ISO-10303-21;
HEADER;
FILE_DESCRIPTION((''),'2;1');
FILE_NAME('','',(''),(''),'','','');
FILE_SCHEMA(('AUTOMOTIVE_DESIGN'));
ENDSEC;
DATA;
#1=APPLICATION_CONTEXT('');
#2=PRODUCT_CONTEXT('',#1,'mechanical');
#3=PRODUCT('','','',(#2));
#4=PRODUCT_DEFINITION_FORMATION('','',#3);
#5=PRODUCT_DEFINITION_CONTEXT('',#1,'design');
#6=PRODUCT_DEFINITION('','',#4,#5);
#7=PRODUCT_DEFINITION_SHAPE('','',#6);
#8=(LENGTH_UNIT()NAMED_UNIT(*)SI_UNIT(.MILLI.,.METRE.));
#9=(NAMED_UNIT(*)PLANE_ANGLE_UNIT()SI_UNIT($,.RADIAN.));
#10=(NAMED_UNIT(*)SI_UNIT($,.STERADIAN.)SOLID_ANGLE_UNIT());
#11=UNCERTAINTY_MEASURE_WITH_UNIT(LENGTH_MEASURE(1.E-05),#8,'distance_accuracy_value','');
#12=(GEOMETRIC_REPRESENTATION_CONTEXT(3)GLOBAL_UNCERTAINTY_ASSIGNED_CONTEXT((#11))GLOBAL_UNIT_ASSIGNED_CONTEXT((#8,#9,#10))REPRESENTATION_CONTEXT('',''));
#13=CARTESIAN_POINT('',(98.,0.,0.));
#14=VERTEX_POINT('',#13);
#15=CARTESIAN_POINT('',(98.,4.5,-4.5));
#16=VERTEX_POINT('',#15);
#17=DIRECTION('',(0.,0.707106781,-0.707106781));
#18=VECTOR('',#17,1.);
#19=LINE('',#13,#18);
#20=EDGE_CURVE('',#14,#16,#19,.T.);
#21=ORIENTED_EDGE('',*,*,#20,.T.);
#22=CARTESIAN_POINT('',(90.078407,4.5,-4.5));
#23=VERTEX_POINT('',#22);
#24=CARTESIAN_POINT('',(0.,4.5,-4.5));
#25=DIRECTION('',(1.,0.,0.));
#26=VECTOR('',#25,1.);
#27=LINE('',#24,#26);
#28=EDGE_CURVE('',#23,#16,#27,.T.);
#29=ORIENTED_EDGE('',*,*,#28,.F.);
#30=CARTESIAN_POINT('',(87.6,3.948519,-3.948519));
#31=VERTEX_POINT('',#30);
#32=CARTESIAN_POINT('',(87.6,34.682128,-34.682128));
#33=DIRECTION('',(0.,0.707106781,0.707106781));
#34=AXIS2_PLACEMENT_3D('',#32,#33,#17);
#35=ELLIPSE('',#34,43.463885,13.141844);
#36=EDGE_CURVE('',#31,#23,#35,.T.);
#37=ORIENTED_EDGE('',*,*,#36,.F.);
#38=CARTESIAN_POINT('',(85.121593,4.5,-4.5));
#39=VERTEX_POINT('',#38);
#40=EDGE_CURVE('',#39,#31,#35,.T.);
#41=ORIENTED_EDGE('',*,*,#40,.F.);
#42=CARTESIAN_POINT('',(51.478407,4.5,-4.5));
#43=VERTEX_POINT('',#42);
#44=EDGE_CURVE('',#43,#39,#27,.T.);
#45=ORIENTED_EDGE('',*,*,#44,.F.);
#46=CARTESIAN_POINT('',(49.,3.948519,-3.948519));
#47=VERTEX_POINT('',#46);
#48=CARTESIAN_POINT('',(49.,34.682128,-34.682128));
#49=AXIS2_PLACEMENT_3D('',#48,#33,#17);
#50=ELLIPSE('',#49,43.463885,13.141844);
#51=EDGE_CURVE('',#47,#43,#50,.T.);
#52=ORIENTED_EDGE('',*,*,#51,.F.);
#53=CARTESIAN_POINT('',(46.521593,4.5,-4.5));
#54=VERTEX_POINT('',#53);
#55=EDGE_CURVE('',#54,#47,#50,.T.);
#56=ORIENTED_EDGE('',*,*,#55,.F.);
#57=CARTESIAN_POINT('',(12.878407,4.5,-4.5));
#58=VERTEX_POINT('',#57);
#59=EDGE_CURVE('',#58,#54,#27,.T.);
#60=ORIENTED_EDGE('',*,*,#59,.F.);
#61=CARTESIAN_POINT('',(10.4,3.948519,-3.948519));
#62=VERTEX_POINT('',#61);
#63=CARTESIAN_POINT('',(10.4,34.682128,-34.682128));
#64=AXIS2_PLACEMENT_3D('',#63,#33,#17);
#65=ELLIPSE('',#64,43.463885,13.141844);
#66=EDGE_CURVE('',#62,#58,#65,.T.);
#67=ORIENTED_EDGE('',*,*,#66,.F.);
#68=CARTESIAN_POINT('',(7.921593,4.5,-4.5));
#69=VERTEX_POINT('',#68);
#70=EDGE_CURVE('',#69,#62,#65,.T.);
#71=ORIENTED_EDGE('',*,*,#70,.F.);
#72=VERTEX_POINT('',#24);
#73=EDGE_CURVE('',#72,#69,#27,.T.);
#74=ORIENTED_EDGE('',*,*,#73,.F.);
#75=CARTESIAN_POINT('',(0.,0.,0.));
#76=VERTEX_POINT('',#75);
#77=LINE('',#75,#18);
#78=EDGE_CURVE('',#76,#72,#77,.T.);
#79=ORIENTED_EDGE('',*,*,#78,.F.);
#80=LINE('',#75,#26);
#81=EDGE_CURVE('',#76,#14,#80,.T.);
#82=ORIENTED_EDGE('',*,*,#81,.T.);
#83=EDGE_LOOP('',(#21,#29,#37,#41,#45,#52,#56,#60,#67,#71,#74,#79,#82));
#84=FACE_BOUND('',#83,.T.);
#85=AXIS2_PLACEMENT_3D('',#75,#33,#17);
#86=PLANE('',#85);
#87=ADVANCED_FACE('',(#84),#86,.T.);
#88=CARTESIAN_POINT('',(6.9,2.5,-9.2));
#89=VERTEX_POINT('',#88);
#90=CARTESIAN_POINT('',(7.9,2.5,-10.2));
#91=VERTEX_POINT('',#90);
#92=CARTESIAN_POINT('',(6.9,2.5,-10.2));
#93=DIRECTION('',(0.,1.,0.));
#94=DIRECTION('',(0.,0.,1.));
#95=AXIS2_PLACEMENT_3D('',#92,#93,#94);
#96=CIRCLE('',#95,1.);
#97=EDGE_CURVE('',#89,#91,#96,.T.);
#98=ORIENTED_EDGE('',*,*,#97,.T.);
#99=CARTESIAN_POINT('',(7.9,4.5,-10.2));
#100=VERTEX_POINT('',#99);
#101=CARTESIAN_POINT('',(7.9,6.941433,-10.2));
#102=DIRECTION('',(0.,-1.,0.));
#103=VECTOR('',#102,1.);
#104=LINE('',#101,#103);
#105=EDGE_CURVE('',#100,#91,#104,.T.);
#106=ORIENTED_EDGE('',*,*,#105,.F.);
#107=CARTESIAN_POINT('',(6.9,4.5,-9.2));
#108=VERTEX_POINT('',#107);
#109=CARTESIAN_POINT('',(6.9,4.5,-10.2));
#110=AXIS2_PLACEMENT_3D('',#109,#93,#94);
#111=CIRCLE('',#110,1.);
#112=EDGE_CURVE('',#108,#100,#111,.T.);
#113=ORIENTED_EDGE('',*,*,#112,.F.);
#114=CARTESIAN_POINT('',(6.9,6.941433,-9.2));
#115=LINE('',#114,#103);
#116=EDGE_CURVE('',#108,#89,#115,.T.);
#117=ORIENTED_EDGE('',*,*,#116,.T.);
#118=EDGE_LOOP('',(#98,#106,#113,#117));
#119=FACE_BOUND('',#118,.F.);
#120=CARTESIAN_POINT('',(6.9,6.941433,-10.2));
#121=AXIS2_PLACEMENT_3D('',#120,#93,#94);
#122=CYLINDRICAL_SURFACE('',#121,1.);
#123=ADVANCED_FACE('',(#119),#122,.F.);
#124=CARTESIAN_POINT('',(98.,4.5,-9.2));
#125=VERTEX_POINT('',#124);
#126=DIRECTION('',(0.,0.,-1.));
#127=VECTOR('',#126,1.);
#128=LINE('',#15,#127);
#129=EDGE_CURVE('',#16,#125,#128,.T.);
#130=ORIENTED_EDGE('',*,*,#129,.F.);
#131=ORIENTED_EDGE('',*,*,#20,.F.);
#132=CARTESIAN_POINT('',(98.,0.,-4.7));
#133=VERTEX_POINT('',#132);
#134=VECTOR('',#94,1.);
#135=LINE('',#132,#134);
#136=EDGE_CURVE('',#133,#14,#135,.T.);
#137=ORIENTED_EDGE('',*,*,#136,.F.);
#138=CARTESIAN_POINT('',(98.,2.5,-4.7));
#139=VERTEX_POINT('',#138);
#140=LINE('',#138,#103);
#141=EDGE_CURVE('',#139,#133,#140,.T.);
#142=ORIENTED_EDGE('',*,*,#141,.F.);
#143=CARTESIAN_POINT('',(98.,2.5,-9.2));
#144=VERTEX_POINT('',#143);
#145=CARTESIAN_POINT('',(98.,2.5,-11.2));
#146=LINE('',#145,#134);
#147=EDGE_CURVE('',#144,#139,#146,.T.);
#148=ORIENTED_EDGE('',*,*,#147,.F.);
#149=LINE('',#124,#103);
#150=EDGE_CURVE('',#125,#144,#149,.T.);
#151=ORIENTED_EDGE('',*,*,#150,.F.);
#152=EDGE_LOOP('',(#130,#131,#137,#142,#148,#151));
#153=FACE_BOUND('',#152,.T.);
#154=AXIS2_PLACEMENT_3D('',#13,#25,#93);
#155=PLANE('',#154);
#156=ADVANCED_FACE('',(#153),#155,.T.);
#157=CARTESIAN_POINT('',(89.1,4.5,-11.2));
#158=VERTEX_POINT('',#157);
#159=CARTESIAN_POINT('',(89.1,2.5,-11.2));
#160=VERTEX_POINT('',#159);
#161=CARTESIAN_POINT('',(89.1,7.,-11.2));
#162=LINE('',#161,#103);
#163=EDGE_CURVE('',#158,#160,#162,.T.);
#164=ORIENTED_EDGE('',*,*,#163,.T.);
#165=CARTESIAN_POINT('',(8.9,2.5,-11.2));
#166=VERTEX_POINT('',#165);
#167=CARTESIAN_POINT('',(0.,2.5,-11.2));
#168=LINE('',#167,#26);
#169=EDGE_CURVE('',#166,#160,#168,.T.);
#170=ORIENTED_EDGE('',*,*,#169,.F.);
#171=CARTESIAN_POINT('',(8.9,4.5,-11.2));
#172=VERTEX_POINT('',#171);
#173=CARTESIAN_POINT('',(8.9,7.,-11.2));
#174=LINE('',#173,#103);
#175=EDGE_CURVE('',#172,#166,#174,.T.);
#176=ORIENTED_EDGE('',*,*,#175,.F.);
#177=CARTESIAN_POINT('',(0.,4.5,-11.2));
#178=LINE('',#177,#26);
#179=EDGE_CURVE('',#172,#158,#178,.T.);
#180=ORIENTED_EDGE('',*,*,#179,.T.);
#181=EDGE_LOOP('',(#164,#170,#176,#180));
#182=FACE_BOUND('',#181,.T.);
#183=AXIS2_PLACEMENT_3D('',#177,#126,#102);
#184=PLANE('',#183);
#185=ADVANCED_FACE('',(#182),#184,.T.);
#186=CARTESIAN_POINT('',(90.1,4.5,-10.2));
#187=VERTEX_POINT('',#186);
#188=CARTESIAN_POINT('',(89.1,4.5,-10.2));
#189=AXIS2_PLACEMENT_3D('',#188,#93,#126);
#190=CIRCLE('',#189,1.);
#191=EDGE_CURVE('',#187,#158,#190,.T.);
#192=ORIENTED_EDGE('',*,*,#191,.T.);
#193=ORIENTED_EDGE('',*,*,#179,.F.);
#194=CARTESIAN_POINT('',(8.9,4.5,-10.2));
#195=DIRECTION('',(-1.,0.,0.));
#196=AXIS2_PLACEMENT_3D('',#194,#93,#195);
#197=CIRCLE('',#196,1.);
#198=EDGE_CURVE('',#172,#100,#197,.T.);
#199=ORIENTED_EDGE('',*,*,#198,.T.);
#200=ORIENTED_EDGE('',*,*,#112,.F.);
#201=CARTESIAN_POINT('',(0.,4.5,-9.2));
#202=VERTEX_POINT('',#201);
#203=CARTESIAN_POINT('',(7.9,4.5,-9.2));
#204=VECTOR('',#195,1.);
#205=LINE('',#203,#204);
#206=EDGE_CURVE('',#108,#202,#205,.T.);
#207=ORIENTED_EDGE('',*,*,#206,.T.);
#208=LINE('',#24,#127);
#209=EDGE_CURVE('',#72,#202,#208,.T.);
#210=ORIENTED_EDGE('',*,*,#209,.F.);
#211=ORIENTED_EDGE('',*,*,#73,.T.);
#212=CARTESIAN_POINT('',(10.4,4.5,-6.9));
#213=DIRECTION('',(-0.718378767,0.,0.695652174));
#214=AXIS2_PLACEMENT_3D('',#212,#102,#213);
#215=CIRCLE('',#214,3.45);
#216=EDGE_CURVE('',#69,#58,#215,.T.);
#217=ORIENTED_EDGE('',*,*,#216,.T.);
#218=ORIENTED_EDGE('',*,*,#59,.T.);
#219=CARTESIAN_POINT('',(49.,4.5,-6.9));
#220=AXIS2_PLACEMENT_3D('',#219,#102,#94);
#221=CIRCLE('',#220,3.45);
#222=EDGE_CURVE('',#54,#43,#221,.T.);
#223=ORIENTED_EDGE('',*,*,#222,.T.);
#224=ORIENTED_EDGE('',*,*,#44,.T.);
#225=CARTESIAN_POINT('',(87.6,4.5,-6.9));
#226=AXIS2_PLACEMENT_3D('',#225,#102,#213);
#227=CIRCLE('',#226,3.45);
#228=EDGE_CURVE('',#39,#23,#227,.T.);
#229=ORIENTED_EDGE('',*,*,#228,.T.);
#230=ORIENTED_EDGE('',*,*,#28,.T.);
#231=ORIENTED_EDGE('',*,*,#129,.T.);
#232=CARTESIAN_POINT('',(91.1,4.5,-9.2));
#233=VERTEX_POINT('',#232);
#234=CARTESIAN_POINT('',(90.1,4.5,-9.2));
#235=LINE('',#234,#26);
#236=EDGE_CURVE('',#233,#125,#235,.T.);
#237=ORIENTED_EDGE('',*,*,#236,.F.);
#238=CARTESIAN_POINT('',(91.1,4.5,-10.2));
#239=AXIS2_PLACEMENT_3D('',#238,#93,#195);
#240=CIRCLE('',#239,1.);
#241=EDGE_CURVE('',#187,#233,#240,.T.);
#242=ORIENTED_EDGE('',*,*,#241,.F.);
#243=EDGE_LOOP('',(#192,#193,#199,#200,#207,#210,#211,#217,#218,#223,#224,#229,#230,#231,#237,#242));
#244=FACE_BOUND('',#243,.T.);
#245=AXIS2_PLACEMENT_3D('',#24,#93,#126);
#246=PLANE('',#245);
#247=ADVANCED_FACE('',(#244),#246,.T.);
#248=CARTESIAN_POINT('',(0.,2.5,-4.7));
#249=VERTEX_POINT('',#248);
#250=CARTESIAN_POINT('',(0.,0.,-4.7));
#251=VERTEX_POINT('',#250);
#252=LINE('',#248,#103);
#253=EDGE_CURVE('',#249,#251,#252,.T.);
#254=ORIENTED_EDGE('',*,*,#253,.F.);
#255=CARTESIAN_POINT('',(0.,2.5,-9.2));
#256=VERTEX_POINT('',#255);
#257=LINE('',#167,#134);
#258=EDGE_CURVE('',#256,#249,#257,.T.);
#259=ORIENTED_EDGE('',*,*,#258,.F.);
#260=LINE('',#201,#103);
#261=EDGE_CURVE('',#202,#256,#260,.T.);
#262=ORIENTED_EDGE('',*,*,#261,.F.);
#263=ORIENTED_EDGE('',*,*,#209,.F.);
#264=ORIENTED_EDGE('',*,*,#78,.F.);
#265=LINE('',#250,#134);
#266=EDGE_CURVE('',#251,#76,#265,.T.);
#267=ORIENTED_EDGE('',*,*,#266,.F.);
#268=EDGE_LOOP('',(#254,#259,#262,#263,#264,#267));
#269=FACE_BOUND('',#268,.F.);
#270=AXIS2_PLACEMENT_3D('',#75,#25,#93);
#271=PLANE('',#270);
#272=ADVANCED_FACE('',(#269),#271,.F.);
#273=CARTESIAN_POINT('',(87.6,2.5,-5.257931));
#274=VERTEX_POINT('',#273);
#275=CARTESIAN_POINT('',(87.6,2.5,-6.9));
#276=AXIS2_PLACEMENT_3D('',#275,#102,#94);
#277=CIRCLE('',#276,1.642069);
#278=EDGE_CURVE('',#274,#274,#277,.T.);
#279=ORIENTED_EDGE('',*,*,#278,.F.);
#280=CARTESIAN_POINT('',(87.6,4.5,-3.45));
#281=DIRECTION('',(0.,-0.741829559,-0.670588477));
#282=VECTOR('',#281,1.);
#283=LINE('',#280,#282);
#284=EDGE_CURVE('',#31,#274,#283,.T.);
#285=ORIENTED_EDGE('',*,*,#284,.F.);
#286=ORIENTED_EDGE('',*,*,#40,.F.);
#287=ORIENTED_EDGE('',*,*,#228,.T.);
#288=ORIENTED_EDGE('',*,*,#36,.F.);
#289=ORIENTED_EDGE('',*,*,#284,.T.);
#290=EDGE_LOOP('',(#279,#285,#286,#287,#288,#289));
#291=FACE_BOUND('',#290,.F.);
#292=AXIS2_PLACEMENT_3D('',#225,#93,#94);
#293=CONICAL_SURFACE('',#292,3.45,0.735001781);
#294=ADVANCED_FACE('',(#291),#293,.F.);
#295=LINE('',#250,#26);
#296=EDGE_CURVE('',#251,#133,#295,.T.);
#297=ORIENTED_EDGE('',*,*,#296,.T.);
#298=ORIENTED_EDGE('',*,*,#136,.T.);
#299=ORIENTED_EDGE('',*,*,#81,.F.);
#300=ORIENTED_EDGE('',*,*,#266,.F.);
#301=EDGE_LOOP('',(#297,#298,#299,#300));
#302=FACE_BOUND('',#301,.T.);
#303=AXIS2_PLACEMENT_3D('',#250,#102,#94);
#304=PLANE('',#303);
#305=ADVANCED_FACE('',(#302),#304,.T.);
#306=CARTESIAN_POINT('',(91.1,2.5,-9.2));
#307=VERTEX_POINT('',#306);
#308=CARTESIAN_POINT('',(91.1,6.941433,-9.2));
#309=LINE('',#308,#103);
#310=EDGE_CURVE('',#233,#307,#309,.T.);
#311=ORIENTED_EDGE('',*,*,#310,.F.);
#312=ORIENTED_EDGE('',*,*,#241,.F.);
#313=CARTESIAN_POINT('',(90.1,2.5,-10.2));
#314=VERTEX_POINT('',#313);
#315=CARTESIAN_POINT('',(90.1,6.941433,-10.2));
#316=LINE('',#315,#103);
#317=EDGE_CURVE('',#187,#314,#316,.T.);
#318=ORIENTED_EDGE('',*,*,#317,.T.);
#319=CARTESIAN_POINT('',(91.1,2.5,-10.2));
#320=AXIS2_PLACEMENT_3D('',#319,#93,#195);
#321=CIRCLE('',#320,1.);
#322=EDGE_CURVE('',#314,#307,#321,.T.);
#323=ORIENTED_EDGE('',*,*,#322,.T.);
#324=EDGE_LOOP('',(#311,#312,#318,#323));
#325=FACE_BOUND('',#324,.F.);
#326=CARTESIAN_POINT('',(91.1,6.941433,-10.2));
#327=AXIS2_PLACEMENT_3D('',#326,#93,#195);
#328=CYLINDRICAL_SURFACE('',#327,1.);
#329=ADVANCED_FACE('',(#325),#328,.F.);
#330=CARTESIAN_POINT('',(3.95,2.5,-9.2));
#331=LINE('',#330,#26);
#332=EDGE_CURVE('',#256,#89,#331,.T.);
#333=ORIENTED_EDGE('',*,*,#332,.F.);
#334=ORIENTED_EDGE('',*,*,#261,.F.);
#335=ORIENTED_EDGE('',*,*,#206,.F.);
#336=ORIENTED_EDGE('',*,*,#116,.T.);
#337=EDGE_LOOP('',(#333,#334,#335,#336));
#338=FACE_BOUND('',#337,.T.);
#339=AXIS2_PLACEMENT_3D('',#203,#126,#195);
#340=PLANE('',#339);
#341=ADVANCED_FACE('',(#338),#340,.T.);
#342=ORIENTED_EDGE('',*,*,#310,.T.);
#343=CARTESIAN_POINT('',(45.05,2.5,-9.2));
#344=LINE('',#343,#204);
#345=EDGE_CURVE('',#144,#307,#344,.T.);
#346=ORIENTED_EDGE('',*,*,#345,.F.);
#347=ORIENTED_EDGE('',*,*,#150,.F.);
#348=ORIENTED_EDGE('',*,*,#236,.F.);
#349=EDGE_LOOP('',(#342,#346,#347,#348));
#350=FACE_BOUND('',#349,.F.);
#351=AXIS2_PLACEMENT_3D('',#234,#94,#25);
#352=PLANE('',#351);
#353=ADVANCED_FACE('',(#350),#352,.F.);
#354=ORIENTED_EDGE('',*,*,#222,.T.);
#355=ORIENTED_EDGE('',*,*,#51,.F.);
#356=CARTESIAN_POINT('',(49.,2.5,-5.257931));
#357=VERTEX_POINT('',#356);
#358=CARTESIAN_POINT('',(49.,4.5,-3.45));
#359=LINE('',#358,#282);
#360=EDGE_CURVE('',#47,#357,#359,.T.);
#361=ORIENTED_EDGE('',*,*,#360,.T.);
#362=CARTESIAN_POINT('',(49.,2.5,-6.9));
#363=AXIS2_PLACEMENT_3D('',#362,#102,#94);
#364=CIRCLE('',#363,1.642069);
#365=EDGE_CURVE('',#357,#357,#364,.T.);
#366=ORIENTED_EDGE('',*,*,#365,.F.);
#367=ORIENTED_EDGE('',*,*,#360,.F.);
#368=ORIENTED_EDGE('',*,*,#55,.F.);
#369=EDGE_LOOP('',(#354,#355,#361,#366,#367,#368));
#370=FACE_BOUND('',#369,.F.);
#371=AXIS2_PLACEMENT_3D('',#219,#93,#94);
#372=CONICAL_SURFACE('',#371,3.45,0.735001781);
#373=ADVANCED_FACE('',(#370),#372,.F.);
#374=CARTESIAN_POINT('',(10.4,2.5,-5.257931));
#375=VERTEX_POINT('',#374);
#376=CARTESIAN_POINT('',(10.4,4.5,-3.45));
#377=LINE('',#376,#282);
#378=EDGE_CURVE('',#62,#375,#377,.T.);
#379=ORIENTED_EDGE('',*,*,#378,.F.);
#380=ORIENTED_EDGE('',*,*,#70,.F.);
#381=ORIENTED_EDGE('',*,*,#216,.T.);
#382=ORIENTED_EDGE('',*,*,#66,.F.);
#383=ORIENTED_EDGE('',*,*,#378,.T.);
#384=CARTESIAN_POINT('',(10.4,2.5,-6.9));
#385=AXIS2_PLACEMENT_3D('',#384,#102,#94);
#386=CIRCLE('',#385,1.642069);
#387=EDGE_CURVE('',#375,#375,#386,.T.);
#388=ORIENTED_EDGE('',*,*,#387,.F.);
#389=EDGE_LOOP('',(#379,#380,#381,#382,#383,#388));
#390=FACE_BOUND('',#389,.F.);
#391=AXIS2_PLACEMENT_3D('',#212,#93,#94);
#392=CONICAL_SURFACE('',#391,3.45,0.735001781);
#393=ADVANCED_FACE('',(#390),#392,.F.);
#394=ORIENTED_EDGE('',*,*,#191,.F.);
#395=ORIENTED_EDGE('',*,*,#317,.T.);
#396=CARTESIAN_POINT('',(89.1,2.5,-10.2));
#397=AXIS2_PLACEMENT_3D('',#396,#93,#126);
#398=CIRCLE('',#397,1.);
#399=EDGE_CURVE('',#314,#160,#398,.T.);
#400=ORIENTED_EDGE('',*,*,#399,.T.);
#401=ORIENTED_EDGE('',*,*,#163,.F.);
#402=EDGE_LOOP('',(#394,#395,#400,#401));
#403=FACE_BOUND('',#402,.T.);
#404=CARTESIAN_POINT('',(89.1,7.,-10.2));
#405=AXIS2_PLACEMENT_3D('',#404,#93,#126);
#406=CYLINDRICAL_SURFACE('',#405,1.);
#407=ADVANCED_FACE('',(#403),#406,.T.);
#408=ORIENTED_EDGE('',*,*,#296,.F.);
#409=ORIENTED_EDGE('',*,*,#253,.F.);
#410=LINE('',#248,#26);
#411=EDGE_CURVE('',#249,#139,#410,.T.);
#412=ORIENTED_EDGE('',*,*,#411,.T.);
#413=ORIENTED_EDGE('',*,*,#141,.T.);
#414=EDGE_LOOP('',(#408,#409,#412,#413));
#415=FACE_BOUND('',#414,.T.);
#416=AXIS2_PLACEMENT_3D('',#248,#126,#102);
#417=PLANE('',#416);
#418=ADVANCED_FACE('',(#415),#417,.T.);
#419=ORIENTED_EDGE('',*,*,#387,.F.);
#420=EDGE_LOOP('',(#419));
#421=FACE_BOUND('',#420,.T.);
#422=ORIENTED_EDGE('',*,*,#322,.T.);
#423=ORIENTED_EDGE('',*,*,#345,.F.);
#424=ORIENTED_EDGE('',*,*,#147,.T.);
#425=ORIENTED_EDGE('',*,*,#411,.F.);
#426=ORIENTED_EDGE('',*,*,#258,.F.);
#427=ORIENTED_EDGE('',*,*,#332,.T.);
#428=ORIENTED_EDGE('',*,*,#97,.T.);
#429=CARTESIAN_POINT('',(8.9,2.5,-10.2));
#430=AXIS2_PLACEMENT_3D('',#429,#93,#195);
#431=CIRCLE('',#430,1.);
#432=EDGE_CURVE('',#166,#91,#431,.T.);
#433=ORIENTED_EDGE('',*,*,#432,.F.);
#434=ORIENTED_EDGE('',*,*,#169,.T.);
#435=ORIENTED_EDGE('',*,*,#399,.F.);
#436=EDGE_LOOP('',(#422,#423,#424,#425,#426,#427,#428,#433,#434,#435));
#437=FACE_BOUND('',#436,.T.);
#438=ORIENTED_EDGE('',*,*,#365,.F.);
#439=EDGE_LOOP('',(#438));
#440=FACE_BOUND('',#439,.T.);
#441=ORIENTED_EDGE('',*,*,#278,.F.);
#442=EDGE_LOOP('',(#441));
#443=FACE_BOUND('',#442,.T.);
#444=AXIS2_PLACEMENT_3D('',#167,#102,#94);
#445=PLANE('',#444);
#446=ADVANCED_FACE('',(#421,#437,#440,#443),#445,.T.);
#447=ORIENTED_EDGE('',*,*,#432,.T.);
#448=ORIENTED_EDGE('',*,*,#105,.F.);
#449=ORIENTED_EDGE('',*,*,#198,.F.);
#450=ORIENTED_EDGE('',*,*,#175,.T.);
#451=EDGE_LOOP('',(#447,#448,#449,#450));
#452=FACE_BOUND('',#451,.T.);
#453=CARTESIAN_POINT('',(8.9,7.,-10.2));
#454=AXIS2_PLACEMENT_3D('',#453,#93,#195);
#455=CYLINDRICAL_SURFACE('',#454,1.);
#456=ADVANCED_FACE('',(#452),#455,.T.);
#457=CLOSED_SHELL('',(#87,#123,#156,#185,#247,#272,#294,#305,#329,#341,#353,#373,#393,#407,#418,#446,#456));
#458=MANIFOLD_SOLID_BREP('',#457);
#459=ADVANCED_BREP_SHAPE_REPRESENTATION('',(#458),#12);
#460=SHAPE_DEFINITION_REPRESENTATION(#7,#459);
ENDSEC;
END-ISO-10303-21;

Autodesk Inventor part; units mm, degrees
ref_plane "YZ Plane" through (0, 0, 0) normal (1, 0, 0) x (0, 1, 0)
ref_plane "XZ Plane" through (0, 0, 0) normal (0, 1, 0) x (-1, 0, 0)
ref_plane "XY Plane" through (0, 0, 0) normal (0, 0, 1) x (1, 0, 0)
sketch "Szkic1" plane through (0, 0, 0) normal (1, 0, 0) x (0, 1, 0)
  line L0 (0, 0) -> (4.5, -4.5)
  line L1 (4.5, -4.5) -> (4.5, -11.2)
  line L2 (4.5, -11.2) -> (2.5, -11.2)
  line L3 (2.5, -11.2) -> (2.5, -4.7)
  line L4 (2.5, -4.7) -> (0, -4.7)
  line L5 (0, -4.7) -> (0, 0)
  dimension "d0" = 11.2
  dimension "d1" = 4.5
  dimension "d2" = 45
  dimension "d3" = 2.5
  dimension "d4" = 6.5
extrude "Wyciągnięcie proste1" add sketch "Szkic1" along normal blind 98
sketch "Szkic2" plane through (0, 4.5, -4.5) normal (0, 1, 0) x (1, 0, 0)
  line L0 (0, 6.7) -> (0, 0.2) projected
  line L1 (0, 6.7) -> (7.9, 6.7)
  line L2 (7.9, 6.7) -> (7.9, 4.7)
  line L3 (7.9, 4.7) -> (0, 4.7)
  line L4 (0, 4.7) -> (0, 6.7)
  line L5 (0, 0.2) -> (98, 0.2) construction
  line L6 (49, 0.2) -> (49, 6.7) construction
  line L7 (0, 6.7) -> (98, 6.7) construction
  line L8 (98, 6.7) -> (90.1, 6.7)
  line L9 (90.1, 6.7) -> (90.1, 4.7)
  line L10 (90.1, 4.7) -> (98, 4.7)
  line L11 (98, 4.7) -> (98, 6.7)
  point P0 (0, -4.5)
  dimension "d7" = 7.9
  dimension "d8" = 2
extrude "Wyciągnięcie proste2" cut sketch "Szkic2" against normal through all
sketch "Szkic3" plane through (0, 4.5, -4.5) normal (0, 1, 0) x (1, 0, 0)
  line L0 (0, -4.5) -> (98, -4.5) construction
  line L1 (49, -4.5) -> (49, 6.7) construction
  line L2 (7.9, 6.7) -> (90.1, 6.7) construction
  line L3 (98, 4.7) -> (98, 0) construction
  point P0 (87.6, 2.4)
  point P1 (49, 2.4)
  point P2 (10.4, 2.4)
  point P3 (98, 0.2)
  dimension "d11" = 10.4
  dimension "d21" = 2.2
hole "Otwór1" at (87.6, 4.5, -6.9) at (49, 4.5, -6.9) at (10.4, 4.5, -6.9) direction (0, -1, 0) diameter 3.2 end through all countersink diameter 6.9 countersink angle 84.225 clearance for "Śruba ze łbem stożkowym ISO 2009/7046" size "M3" standard "ISO"
fillet "Zaokrąglenie1" radius 1 4 edges at (90.1, 3.4707, -9.2) (90.1, 3.5, -11.2) (7.9, 3.4707, -9.2) (7.9, 3.5, -11.2)
properties part number "Plog2" material "Stal"
